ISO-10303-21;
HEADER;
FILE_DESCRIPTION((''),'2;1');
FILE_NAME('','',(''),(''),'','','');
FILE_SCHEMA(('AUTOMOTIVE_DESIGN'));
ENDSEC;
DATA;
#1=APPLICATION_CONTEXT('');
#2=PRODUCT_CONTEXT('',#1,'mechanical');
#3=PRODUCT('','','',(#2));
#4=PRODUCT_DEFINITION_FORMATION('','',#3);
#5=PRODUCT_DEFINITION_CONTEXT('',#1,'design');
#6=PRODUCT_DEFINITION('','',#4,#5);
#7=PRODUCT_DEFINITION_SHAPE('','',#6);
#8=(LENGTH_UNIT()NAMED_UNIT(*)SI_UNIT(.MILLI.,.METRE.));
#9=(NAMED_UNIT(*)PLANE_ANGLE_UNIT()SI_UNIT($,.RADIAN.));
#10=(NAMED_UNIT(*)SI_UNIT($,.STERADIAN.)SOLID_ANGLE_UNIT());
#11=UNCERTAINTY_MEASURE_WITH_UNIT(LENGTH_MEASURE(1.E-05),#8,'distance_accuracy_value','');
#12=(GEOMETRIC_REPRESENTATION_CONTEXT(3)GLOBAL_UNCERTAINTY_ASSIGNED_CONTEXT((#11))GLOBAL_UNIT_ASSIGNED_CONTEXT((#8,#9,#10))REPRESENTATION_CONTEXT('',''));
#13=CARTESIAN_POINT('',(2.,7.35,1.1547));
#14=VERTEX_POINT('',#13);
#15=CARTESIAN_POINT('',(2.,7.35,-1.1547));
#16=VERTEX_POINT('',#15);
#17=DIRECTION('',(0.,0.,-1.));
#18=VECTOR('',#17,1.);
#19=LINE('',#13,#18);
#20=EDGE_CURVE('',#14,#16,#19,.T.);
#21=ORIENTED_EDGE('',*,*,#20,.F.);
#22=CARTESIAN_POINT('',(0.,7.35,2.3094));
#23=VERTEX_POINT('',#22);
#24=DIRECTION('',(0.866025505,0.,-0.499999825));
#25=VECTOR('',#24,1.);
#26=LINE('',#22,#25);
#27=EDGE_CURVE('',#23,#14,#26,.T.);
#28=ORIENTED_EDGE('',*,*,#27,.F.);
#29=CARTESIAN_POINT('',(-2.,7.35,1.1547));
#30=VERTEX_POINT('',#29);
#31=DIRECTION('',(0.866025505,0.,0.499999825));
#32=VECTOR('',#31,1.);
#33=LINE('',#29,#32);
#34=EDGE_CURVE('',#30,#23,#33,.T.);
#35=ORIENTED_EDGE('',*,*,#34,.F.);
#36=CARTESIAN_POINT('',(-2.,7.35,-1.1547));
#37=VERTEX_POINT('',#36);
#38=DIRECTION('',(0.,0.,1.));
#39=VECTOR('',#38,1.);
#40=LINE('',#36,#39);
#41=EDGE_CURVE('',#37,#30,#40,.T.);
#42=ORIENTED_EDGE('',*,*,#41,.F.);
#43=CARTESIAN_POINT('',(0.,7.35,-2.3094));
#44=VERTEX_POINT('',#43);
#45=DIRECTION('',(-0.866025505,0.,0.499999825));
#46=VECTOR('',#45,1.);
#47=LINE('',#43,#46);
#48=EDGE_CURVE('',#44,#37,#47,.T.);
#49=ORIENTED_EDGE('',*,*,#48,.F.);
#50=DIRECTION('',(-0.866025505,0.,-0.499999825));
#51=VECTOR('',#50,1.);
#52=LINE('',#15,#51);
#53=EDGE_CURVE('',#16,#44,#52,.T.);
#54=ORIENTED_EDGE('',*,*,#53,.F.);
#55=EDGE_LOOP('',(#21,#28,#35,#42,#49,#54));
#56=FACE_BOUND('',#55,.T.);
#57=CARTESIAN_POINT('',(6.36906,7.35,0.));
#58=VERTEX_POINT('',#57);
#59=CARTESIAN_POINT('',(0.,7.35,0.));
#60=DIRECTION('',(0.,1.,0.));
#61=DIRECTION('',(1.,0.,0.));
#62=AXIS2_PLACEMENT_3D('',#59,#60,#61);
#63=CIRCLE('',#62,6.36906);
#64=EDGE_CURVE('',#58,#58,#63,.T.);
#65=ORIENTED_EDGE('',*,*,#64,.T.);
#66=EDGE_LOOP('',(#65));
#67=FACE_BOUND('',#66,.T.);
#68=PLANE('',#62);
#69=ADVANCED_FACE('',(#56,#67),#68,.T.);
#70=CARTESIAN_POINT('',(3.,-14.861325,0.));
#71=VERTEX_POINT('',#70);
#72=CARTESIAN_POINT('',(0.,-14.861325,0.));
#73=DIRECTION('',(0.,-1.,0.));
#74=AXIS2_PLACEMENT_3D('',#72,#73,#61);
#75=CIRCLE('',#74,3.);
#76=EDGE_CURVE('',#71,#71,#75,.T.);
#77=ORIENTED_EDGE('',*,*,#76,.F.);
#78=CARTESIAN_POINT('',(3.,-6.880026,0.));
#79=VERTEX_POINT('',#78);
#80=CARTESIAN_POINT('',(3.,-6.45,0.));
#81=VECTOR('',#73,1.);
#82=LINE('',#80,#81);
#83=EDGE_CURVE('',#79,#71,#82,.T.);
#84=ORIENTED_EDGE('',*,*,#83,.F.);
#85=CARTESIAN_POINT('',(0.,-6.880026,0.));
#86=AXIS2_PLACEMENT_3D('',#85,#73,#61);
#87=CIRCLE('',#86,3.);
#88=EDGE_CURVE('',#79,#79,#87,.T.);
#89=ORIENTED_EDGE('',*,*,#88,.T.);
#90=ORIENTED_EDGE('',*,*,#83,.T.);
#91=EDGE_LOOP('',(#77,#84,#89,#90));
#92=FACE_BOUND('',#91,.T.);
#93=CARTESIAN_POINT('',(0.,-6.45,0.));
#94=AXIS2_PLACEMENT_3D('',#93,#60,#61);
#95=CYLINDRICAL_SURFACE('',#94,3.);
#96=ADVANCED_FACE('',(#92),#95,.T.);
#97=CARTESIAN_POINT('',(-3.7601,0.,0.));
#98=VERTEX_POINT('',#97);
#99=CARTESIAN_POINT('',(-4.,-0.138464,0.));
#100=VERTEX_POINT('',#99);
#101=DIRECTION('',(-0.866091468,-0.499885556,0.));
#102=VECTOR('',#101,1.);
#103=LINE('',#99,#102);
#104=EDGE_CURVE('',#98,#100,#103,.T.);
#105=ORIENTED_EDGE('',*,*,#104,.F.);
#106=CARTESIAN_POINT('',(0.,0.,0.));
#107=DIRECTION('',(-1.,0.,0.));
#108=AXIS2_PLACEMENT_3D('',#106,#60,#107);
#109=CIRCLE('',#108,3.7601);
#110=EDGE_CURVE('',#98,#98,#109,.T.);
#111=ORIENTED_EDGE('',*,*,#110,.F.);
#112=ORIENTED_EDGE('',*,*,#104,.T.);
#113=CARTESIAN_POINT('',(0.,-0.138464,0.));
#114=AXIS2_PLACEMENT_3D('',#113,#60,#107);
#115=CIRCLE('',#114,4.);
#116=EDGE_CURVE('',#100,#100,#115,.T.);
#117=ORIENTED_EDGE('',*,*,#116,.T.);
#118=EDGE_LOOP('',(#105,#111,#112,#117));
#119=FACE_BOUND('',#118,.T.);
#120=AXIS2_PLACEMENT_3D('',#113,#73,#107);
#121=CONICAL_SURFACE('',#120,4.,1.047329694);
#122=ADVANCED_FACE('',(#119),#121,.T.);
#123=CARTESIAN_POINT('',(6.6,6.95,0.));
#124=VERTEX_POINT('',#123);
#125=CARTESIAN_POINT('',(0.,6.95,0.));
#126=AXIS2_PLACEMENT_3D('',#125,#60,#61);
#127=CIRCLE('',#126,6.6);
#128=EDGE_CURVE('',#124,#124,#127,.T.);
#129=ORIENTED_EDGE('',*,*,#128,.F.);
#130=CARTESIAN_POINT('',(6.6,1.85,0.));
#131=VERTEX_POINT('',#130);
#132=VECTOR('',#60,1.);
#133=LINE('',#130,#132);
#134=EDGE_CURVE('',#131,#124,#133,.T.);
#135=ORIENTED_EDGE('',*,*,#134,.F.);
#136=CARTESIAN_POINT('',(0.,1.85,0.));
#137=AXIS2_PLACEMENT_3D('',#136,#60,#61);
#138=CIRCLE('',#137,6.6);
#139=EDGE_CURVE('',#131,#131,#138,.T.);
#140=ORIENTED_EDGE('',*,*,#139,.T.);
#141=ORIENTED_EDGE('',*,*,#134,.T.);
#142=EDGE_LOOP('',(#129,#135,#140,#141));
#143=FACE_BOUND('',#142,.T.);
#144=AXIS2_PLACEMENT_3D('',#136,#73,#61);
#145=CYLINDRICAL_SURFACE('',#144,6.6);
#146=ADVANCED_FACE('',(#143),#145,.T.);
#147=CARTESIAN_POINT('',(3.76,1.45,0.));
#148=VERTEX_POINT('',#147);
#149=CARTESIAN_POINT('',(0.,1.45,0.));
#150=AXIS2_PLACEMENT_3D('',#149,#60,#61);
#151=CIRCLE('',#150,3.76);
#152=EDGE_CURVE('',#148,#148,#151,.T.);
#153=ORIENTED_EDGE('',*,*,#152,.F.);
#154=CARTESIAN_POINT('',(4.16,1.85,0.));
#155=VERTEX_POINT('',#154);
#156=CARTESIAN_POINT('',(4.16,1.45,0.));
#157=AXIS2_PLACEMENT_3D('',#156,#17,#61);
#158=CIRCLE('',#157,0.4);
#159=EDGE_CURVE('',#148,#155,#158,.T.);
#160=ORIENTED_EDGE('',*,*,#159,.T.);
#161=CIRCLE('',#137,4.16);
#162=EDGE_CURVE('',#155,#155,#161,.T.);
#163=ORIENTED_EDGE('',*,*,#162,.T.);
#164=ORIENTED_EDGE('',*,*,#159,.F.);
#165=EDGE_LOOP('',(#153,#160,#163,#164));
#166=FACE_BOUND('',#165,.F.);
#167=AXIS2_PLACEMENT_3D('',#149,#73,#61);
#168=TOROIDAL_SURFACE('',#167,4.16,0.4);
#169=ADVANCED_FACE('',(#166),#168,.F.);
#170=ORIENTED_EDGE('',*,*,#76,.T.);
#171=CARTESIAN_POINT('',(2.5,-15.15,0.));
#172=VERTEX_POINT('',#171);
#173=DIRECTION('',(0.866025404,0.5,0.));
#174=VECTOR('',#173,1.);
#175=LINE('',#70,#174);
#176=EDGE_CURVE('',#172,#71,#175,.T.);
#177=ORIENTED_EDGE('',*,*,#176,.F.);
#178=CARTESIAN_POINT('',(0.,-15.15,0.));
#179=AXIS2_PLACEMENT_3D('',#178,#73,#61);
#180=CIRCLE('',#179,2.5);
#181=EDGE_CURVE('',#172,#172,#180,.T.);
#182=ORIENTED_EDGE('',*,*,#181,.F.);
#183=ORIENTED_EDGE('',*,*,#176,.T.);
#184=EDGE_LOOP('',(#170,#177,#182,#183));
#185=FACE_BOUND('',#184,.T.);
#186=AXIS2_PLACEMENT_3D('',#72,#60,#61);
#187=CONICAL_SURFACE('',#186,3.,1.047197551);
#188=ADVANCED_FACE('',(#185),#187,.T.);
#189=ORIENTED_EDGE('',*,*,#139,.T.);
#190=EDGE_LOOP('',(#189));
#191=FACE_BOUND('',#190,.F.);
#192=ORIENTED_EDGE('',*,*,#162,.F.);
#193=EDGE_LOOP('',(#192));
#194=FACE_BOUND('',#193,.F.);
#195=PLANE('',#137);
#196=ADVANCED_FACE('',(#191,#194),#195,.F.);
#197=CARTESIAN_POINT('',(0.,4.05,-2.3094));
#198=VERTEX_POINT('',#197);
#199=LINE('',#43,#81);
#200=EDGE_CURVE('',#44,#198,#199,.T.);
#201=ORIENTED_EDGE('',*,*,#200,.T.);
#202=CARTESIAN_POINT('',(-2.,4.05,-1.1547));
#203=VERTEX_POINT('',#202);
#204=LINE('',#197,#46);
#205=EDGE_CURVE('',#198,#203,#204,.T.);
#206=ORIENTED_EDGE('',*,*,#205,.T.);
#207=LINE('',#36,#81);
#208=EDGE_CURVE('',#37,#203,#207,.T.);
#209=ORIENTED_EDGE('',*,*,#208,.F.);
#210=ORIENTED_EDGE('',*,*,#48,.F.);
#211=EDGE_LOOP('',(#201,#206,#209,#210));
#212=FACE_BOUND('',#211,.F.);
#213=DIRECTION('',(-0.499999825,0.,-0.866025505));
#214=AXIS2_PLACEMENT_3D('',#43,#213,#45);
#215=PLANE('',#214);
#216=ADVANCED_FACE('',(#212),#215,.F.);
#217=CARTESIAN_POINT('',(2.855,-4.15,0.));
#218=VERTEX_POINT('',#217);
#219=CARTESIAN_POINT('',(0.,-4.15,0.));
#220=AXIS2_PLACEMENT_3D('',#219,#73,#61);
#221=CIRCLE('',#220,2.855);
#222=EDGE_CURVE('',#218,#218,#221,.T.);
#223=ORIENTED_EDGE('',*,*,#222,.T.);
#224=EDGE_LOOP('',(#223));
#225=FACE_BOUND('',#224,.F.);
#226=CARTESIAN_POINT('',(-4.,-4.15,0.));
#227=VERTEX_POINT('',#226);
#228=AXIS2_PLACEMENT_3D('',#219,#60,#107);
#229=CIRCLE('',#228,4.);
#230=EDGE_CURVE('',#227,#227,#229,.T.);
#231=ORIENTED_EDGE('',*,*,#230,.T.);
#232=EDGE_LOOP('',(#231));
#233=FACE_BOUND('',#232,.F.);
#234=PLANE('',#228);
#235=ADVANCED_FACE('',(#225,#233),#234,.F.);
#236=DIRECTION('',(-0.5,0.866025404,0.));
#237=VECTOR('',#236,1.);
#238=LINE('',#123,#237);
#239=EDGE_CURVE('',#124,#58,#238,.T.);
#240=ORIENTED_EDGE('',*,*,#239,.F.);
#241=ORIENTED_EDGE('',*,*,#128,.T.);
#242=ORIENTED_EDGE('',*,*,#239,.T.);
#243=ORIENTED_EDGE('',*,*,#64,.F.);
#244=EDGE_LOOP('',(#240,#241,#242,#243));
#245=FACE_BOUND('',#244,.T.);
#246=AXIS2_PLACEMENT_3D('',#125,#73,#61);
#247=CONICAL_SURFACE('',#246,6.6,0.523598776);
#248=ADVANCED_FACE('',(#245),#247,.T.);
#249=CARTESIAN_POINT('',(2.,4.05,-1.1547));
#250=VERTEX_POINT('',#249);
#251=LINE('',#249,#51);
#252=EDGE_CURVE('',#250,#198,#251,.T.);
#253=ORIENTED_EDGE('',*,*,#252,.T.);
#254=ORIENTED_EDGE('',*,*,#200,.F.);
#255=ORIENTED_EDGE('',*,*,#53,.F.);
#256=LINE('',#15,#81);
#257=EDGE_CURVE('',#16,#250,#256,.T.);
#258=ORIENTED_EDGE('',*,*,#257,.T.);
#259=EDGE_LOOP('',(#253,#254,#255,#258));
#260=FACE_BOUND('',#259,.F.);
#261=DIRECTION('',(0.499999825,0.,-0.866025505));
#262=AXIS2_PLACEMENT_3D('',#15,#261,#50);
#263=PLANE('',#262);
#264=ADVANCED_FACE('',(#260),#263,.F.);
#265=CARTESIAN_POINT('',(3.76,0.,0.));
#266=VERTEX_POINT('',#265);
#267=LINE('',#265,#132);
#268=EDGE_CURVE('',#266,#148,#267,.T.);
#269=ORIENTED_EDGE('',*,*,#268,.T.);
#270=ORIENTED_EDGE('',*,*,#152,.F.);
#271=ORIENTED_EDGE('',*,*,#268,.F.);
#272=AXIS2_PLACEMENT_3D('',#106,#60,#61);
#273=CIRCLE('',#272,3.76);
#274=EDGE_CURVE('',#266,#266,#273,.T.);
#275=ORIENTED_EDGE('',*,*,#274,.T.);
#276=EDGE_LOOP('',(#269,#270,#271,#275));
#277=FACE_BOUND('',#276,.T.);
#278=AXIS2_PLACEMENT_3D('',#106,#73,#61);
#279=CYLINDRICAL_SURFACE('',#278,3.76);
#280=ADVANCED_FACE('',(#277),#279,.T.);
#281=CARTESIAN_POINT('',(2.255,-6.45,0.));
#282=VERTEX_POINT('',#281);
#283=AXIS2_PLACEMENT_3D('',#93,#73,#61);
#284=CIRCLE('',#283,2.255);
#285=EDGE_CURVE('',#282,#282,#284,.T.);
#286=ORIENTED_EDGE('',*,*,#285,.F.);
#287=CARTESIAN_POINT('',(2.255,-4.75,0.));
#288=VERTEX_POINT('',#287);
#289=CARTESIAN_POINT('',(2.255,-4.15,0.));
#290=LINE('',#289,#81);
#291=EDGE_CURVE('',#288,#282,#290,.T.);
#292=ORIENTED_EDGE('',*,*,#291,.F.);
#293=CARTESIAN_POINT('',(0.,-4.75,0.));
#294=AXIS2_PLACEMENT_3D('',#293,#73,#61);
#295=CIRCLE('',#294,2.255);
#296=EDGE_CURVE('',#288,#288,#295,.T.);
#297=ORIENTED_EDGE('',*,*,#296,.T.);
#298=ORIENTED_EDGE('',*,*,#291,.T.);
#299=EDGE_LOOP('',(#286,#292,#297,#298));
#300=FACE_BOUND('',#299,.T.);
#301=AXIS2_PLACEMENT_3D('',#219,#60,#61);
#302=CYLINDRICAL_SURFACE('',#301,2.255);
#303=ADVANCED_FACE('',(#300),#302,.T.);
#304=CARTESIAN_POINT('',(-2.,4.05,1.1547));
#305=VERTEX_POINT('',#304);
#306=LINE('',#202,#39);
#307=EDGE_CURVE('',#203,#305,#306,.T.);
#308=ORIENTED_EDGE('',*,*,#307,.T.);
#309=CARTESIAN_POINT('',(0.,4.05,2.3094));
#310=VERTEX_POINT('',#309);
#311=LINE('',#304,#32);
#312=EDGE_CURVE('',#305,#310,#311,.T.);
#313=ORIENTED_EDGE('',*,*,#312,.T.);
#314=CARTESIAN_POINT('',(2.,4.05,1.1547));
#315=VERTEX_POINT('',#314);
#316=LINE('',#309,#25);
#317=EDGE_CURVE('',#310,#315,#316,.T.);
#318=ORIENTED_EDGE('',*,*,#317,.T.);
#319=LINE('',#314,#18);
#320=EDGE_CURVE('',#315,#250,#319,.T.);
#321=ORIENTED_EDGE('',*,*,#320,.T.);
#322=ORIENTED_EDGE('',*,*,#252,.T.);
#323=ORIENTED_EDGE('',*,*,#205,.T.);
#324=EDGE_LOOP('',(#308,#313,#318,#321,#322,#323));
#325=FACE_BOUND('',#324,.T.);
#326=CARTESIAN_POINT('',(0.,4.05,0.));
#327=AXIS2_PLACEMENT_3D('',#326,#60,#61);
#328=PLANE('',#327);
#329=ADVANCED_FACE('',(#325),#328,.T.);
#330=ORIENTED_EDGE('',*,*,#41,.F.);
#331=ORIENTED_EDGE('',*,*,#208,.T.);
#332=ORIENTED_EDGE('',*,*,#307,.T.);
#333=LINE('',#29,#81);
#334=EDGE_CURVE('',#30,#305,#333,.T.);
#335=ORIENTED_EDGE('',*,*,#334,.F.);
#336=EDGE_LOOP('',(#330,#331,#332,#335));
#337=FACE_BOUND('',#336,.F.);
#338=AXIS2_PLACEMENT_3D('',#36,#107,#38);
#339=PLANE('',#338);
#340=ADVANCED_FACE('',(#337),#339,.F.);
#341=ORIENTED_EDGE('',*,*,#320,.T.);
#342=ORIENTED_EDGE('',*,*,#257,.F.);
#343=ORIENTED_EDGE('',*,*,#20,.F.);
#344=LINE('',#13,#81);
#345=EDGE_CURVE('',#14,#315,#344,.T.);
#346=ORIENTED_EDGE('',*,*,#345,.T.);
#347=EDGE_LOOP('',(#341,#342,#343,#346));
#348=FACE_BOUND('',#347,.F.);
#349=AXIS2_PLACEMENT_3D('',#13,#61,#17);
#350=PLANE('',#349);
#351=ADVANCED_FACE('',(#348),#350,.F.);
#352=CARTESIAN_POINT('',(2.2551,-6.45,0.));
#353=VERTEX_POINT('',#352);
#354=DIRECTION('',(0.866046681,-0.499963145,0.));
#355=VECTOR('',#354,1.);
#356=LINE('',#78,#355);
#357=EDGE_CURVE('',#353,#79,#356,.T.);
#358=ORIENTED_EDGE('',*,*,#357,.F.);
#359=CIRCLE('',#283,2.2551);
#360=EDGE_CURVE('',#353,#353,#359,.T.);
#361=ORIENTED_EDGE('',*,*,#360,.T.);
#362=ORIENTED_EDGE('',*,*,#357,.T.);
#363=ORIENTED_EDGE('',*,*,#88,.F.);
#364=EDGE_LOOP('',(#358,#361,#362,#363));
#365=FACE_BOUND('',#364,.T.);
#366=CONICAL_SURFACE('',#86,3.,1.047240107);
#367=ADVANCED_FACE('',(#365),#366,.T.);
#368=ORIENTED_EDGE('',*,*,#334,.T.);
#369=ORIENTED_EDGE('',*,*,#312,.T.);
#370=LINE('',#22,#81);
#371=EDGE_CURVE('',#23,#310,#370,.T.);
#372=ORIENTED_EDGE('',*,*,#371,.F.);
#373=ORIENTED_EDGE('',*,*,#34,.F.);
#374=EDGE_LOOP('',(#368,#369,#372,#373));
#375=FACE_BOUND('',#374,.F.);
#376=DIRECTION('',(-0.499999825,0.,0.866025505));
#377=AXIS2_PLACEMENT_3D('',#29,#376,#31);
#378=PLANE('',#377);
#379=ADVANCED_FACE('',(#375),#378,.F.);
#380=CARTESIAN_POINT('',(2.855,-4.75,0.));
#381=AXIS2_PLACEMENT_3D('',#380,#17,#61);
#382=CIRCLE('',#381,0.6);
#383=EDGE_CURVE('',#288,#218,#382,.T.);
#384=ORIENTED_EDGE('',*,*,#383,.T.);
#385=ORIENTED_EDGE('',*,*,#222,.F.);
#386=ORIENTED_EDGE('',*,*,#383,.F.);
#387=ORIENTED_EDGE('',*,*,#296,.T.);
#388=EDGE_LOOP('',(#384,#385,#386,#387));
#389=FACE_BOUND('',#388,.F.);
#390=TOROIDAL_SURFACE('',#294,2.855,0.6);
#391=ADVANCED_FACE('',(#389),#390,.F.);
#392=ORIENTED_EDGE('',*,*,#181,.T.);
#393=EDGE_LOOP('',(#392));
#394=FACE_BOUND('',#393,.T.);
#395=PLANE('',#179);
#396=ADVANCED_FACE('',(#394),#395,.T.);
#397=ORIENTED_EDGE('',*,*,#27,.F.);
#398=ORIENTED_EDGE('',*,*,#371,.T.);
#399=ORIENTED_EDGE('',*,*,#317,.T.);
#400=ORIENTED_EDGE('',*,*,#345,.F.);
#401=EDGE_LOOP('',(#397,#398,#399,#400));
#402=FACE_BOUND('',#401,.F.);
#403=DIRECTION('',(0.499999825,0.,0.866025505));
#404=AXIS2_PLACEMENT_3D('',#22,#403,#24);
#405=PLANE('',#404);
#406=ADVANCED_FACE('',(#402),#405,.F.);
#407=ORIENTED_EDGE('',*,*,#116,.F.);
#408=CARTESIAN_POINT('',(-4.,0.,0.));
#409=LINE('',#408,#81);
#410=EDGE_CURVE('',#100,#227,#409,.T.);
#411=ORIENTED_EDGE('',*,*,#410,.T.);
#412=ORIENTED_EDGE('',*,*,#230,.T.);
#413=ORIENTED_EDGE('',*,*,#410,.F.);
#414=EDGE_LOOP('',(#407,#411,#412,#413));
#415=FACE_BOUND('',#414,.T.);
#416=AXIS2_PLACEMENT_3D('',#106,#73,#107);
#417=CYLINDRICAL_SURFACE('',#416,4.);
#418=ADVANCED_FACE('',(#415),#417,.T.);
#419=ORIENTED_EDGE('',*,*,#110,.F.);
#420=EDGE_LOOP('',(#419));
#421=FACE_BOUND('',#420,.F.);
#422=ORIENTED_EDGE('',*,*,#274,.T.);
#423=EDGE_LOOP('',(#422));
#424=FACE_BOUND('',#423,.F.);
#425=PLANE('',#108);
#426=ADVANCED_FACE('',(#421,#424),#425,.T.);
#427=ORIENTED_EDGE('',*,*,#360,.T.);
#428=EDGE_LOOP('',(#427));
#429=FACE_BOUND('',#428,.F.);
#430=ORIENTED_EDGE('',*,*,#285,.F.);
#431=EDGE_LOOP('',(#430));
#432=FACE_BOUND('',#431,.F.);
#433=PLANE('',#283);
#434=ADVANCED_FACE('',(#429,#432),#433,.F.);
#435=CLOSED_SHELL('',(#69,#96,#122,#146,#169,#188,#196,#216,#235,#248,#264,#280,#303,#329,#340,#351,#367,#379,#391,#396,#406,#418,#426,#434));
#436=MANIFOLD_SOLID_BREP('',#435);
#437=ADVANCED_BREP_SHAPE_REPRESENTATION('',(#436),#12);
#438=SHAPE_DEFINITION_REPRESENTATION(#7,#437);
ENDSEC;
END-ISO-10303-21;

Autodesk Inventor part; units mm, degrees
ref_plane "YZ Plane" through (0, 0, 0) normal (1, 0, 0) x (0, 1, 0)
ref_plane "XZ Plane" through (0, 0, 0) normal (0, 1, 0) x (-1, 0, 0)
ref_plane "XY Plane" through (0, 0, 0) normal (0, 0, 1) x (1, 0, 0)
sketch "Sketch1" plane through (0, 0, 0) normal (0, 0, 1) x (1, 0, 0)
  line L0 (0, 0) -> (-4, 0)
  line L1 (-4, 0) -> (-4, -4.15)
  line L2 (-4, -4.15) -> (0, -4.15)
  line L3 (0, -4.15) -> (0, 0)
  line L4 (0, 0) -> (-13.1356, 0) construction
  dimension "d1" = 4.15
  dimension "d2" = 4
revolve "Shoulder" add sketch "Sketch1" angle 360 about axis through (0, -4.15, 0) along (0, 1, 0)
sketch "Sketch2" plane through (0, 0, 0) normal (0, 1, 0) x (1, 0, 0)
  circle A0 centre (0, 0) radius 4 projected
  circle A1 centre (0, 0) radius 3.76
  dimension "d3" = 7.52
extrude "Shoulder_neck" add sketch "Sketch2" along normal blind 1.85 contours A1
sketch "Sketch3" plane through (0, 1.85, 0) normal (0, 1, 0) x (1, 0, 0)
  circle A0 centre (0, 0) radius 3.76 projected
  circle A1 centre (0, 0) radius 6.6
  dimension "d6" = 13.2
extrude "Head" add sketch "Sketch3" along normal blind 5.5 contours A0 | A1
sketch "Sketch4" plane through (0, -4.15, 0) normal (0, -1, 0) x (1, 0, 0)
  circle A0 centre (0, 0) radius 4 projected
  circle A1 centre (0, 0) radius 2.255
  dimension "d9" = 4.51
extrude "Thread_neck" add sketch "Sketch4" along normal blind 2.3 contours A1
sketch "Sketch5" plane through (0, -6.45, 0) normal (0, -1, 0) x (1, 0, 0)
  circle A0 centre (0, 0) radius 2.255 projected
  circle A1 centre (0, 0) radius 3
  dimension "d12" = 6
extrude "Thread_shoulder" add sketch "Sketch5" along normal blind 8.7 contours A0 | A1
sketch "Sketch6" plane through (0, 7.35, 0) normal (0, 1, 0) x (1, 0, 0)
  circle A0 centre (0, 0) radius 6.6 projected
  circle A1 centre (0, 0) radius 2 construction
  line L0 (-2, 1.1547) -> (-2, -1.1547)
  line L1 (-2, -1.1547) -> (0, -2.3094)
  line L2 (0, -2.3094) -> (2, -1.1547)
  line L3 (2, -1.1547) -> (2, 1.1547)
  line L4 (2, 1.1547) -> (0, 2.3094)
  line L5 (0, 2.3094) -> (-2, 1.1547)
  dimension "d15" = 4
extrude "Hex" cut sketch "Sketch6" against normal blind 3.3 contours L5 L4 L3 L2 L1 L0
chamfer "Chamfer1" distance 0.24 angle 30 1 edges at (4, 0, 0) measured on face at (-3.8813, 0, -0.3191)
fillet "Fillet1" radius 0.4 1 edges at (-3.76, 1.85, 0)
chamfer "Chamfer2" distance 0.4 angle 30 1 edges at (-6.6, 7.35, 0) measured on face at (6.5145, 5.5167, 1.0587)
chamfer "Chamfer3" distance 0.5 angle 30 1 edges at (-3, -15.15, 0) measured on face at (-0.5351, -15.15, 1.0949)
fillet "Fillet2" radius 0.6 1 edges at (-2.255, -4.15, 0)
chamfer "Chamfer7" distance 0.745 angle 30 1 edges at (-3, -6.45, 0) measured on face at (2.7008, -6.45, -0.4192)
thread "Thread" size "M6x1" class "6g" standard "ANSI Metric M Profile" full length
equation "\"d3\" = Shoulder_neck_dia"
equation "\"d4\" = Shoulder_neck_length"
equation "\"d6\" = Head_diameter"
equation "\"d7\" = Head_height"
equation "\"d9\" = Thread_neck_dia"
equation "\"d10\" = Thread_neck_length"
equation "\"d12\" = Thread_diameter"
equation "\"d13\" = Thread_length - Thread_neck_length"
equation "\"d15\" = Hex_size"
equation "\"d16\" = Hex_length"
equation "\"d18\" = -0.5 * Shoulder_neck_dia + 0.5 * Shoulder_diameter"
equation "\"d64\" = -0.5 * Shoulder_neck_dia + 0.5 * Shoulder_diameter"
equation "\"d21\" = 0.1 * Hex_size"
equation "\"d65\" = 0.1 * Hex_size"
equation "\"d23\" = 0.5 * Thread_pitch"
equation "\"d66\" = 0.5 * Thread_pitch"
equation "\"d25\" = Thread_neck_radius"
equation "\"d60\" = -0.5 * Thread_neck_dia + 0.5 * Thread_diameter"
equation "\"d67\" = -0.5 * Thread_neck_dia + 0.5 * Thread_diameter"
equation "\"d1\" = Shoulder_length - Shoulder_neck_length"
equation "\"d2\" = 0.5 * Shoulder_diameter"
equation "\"Shoulder_diameter\" = 8"
equation "\"Shoulder_length\" = 6"
equation "\"Shoulder_neck_dia\" = 7.52"
equation "\"Thread_diameter\" = 6"
equation "\"Thread_length\" = 11"
equation "\"Head_diameter\" = 13.2"
equation "\"Head_height\" = 5.5"
equation "\"Thread_neck_dia\" = 4.51"
equation "\"Hex_size\" = 4"
equation "\"Hex_length\" = 3.3"
equation "\"Thread_pitch\" = 1"
equation "\"Shoulder_neck_length\" = 1.85"
equation "\"Thread_neck_length\" = 2.3"
equation "\"Thread_neck_radius\" = 0.6"
properties part number "SCREW,SHOULDER,M8X6MM" material "Steel, High Strength Low Alloy"
